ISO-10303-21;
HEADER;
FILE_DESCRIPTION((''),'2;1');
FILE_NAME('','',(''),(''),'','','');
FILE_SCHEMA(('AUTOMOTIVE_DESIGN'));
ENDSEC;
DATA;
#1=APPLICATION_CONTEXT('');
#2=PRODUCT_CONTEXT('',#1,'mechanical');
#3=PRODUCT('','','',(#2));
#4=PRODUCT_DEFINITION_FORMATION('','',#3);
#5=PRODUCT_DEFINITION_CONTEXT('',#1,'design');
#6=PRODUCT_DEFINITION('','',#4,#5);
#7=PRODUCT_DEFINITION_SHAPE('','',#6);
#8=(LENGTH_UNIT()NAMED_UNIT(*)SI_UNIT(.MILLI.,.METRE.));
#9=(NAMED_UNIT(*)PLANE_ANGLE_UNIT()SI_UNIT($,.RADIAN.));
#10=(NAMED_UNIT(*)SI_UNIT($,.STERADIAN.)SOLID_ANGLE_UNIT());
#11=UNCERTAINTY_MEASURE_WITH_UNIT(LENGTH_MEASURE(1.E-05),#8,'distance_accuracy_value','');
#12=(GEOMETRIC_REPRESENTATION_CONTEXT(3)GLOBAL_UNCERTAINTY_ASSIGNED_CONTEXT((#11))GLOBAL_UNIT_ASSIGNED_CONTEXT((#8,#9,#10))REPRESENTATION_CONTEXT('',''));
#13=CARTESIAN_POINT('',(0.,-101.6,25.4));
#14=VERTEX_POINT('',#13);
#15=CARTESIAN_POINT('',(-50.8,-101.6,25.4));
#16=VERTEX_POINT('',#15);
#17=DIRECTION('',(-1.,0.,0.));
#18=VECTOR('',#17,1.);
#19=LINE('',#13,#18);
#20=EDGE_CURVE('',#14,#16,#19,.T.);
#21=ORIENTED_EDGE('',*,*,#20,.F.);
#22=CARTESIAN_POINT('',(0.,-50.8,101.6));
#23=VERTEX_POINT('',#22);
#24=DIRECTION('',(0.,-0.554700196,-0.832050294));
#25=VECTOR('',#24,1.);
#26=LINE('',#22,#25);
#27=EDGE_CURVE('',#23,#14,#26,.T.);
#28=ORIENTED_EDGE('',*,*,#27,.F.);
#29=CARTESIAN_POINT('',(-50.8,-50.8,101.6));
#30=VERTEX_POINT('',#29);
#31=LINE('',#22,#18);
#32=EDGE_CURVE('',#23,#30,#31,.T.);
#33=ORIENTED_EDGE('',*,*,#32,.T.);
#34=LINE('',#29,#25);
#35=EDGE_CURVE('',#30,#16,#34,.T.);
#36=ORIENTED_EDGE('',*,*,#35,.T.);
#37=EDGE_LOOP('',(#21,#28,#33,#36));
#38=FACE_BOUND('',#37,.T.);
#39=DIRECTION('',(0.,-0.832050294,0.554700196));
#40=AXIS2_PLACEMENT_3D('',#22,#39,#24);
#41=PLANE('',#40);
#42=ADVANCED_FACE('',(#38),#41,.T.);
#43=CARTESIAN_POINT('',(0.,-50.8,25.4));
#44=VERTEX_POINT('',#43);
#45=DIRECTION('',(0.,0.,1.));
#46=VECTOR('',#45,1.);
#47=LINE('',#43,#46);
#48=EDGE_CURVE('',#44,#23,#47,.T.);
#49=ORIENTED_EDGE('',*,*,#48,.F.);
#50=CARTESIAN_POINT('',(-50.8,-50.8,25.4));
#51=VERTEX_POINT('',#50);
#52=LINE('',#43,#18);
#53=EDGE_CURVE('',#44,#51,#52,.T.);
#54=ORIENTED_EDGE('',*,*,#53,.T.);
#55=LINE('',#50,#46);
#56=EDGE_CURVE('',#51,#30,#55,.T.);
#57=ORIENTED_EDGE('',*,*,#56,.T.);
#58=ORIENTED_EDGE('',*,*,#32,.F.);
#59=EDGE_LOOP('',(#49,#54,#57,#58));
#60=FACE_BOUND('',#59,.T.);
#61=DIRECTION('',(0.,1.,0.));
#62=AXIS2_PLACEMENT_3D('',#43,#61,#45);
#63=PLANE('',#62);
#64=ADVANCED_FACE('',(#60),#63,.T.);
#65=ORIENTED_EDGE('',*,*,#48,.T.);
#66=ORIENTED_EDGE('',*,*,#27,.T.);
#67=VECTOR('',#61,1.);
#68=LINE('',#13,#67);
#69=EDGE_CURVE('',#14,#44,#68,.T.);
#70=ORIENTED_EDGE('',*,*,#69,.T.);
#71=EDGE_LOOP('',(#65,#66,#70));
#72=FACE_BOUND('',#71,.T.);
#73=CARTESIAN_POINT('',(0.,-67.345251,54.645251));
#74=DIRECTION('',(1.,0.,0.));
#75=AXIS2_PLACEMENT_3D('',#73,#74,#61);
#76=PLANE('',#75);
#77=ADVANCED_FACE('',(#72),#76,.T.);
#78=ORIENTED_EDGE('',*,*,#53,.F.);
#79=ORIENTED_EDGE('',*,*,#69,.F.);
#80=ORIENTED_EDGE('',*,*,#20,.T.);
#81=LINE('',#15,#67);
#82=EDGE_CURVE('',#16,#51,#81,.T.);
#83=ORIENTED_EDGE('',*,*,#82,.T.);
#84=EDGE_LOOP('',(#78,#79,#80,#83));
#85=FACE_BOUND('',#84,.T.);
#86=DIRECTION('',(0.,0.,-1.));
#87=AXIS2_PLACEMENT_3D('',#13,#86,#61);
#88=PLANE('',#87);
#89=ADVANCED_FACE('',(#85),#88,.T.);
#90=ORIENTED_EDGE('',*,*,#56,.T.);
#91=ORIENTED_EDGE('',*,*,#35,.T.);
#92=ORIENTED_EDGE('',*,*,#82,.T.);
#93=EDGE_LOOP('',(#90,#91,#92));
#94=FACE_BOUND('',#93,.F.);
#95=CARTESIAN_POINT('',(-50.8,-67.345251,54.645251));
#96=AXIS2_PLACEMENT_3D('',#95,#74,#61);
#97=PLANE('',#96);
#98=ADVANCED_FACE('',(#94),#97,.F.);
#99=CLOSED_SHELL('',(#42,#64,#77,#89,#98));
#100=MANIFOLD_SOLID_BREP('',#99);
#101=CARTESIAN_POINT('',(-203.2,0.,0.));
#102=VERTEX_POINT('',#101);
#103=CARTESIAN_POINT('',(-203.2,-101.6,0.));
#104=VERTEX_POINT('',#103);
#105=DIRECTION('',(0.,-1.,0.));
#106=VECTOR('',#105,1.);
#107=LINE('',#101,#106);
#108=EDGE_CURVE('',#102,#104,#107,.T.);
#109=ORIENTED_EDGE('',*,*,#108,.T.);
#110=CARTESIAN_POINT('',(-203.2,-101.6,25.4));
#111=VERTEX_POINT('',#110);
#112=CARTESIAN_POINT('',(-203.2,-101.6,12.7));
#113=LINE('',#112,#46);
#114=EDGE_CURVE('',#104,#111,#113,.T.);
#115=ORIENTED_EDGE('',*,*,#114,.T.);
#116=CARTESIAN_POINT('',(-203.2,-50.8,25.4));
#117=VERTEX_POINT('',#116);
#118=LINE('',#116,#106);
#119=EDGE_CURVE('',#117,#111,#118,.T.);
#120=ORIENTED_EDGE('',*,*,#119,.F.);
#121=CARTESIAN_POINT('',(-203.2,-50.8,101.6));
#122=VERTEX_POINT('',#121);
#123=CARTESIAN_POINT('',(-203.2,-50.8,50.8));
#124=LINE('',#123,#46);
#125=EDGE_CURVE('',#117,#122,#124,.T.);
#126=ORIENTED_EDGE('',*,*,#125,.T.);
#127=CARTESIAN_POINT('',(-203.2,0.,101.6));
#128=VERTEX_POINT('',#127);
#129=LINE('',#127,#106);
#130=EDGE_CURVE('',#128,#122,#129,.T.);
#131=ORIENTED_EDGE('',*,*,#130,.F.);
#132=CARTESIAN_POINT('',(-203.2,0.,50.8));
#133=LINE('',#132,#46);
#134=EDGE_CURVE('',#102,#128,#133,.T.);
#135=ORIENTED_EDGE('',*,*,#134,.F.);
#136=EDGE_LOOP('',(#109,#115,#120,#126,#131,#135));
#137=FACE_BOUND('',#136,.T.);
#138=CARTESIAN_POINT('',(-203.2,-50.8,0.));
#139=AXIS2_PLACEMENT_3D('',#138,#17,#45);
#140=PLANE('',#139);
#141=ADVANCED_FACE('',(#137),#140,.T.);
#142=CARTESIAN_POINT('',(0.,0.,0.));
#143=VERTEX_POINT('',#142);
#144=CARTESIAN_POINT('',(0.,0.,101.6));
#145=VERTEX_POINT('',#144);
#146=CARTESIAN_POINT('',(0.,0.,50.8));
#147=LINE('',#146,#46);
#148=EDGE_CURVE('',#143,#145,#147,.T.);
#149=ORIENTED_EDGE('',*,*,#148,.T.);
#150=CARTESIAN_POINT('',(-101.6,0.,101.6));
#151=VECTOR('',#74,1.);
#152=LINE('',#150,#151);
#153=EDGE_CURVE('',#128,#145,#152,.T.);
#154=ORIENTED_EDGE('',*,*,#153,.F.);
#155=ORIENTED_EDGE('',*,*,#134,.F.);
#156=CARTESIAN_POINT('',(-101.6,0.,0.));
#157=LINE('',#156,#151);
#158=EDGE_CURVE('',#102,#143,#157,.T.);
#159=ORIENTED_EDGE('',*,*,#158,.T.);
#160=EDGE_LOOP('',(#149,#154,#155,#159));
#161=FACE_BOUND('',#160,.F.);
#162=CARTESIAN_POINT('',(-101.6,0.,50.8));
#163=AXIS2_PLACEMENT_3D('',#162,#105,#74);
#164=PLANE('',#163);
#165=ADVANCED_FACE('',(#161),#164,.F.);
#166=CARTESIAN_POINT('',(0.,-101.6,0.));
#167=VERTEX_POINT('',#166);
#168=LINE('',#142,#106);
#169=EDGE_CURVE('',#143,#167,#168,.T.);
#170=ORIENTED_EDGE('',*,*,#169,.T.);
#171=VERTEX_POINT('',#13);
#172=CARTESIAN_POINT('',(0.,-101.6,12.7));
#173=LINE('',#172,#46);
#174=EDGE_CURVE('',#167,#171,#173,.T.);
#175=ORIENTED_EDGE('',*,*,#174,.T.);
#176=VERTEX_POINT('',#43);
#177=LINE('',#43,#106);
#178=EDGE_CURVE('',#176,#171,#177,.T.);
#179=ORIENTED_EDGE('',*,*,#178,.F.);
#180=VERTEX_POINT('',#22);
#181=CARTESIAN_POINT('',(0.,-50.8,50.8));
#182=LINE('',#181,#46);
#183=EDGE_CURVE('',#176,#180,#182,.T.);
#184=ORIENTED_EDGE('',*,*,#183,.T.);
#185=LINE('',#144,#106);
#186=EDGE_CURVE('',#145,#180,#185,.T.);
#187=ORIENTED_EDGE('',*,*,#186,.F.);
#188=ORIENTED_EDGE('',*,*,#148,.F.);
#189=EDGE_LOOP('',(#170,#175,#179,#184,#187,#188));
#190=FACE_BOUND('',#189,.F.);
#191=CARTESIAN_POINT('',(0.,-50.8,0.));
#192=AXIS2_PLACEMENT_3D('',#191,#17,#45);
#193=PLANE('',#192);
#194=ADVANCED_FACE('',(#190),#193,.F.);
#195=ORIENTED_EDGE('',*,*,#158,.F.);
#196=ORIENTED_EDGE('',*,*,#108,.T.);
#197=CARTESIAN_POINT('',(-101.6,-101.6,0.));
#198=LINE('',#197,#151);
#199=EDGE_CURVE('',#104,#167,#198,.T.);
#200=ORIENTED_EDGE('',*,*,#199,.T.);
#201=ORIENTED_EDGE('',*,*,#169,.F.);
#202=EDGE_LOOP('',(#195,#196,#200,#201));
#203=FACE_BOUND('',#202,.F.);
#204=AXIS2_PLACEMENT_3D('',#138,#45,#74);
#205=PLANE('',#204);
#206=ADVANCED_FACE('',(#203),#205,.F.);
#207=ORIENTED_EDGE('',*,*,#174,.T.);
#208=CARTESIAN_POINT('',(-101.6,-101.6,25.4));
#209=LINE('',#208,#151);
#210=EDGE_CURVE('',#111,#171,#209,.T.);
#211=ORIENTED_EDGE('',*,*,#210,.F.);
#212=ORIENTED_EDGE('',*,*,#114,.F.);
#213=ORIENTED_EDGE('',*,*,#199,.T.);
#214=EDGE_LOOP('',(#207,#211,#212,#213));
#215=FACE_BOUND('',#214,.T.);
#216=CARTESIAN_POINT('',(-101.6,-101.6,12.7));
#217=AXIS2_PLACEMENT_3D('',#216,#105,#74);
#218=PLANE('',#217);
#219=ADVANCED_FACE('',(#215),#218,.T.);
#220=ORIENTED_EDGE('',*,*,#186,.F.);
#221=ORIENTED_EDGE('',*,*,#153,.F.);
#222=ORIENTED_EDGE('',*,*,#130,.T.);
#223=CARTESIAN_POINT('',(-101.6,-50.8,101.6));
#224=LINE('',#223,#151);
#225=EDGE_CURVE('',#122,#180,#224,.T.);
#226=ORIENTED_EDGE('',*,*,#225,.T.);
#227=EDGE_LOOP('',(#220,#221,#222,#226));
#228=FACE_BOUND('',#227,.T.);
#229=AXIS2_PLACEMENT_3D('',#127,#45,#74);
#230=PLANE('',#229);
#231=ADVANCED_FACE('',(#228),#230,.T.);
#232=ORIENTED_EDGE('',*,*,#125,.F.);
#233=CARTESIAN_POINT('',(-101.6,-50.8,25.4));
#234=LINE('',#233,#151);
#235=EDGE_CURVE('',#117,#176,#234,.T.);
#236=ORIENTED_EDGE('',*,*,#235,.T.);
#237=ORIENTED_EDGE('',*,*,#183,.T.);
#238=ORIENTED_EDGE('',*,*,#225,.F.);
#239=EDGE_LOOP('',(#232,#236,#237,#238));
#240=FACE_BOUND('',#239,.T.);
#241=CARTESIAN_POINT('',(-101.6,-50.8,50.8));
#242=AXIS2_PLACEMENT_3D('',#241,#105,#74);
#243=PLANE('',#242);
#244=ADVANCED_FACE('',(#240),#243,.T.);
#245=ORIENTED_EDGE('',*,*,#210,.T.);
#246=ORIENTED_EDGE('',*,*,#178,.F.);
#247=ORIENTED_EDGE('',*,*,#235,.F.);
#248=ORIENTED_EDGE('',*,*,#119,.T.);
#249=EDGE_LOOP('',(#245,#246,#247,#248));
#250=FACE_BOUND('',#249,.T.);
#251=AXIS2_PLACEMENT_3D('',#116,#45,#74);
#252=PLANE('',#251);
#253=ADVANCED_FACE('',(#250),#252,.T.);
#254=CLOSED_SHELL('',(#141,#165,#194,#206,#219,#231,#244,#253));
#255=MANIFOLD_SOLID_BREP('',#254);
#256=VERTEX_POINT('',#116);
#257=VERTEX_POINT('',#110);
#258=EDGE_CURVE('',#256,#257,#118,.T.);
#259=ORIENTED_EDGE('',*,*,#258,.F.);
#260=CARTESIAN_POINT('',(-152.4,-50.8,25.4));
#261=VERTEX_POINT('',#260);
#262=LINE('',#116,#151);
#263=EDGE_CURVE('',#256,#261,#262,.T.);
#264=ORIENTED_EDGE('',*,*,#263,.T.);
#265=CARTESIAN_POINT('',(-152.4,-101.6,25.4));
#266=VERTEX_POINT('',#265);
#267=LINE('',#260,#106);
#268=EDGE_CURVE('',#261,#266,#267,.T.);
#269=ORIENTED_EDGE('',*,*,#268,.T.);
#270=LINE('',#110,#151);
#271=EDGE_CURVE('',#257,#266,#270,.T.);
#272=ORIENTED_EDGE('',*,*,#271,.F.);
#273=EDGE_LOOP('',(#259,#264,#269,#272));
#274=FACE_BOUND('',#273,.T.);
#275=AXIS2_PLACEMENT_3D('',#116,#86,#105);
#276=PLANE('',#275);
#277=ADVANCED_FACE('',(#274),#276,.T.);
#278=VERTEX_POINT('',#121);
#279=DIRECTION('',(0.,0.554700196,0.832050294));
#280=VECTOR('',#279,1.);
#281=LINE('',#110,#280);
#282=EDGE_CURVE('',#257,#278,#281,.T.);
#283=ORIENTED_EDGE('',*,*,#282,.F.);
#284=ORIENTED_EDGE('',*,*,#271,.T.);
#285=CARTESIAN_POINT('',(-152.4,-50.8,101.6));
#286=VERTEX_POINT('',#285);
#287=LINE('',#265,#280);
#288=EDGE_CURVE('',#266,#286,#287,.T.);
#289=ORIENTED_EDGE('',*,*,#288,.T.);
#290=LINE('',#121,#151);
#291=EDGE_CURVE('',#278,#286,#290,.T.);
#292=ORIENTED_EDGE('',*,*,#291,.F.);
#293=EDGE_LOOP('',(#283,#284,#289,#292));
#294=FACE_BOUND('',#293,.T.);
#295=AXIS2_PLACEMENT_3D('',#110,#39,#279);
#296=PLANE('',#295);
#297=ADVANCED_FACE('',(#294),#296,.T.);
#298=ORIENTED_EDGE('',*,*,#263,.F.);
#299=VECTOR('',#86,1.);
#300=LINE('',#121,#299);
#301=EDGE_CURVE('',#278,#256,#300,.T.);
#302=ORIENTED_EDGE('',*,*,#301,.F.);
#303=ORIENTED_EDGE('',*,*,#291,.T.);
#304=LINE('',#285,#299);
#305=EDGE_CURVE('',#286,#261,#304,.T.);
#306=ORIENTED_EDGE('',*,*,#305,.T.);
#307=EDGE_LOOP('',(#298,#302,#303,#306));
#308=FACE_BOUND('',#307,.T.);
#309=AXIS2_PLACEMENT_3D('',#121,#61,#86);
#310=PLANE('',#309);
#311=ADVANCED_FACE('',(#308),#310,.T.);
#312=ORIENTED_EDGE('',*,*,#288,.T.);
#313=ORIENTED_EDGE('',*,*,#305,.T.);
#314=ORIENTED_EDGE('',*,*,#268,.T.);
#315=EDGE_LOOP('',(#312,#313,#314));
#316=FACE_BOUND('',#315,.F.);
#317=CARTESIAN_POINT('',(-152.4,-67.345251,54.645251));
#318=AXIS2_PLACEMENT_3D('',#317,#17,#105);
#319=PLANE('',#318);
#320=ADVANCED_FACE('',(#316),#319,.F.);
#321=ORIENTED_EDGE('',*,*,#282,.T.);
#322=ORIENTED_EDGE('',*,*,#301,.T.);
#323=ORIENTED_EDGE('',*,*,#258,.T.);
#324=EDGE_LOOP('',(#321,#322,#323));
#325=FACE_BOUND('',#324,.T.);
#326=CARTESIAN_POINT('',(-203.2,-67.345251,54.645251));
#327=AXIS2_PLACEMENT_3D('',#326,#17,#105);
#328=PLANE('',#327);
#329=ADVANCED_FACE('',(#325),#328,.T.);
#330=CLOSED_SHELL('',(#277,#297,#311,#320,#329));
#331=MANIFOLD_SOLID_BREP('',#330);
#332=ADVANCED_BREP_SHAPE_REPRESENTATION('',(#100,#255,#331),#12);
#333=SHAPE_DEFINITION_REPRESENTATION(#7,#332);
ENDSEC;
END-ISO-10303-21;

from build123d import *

# Parameters (mm, degrees)
F0_W     = 203.2
F0_H     = 101.6
F1_DEPTH = 50.8
F2_W     = 203.2
F2_H     = 25.4
F3_DEPTH = 50.8
F5_DEPTH = 50.8
F7_DEPTH = 50.8


# Not quite as in the source:
# - a feature names something its author has since deleted; it is built from what else it names


with BuildPart() as f1:
    # F0 (on Front) → F1 (new body)
    with BuildSketch(Plane.XZ):
        with Locations((-101.6, 50.8)):
            Rectangle(F0_W, F0_H)
    extrude(amount=F1_DEPTH)

    # F2 (on face) → F3 (join)
    with BuildSketch(Plane.XZ.offset(50.8)):
        with Locations((-101.6, 12.7)):
            Rectangle(F2_W, F2_H)
    extrude(amount=F3_DEPTH)


with BuildPart() as f5:
    # F4 (on face) → F5 (new body)
    with BuildSketch(Plane(origin=(-203.2, 0, 0), x_dir=(0, -1, 0), z_dir=(-1, 0, 0))):
        Polygon((101.6, 25.4), (50.8, 101.6), (50.8, 25.4), align=None)
    extrude(amount=-F5_DEPTH)


with BuildPart() as f7:
    # F6 (on face) → F7 (new body)
    with BuildSketch(Plane.YZ):
        Polygon((-50.8, 25.4), (-50.8, 101.6), (-101.6, 25.4), align=None)
    extrude(amount=-F7_DEPTH)


solid = Compound([f1.part, f5.part, f7.part])
